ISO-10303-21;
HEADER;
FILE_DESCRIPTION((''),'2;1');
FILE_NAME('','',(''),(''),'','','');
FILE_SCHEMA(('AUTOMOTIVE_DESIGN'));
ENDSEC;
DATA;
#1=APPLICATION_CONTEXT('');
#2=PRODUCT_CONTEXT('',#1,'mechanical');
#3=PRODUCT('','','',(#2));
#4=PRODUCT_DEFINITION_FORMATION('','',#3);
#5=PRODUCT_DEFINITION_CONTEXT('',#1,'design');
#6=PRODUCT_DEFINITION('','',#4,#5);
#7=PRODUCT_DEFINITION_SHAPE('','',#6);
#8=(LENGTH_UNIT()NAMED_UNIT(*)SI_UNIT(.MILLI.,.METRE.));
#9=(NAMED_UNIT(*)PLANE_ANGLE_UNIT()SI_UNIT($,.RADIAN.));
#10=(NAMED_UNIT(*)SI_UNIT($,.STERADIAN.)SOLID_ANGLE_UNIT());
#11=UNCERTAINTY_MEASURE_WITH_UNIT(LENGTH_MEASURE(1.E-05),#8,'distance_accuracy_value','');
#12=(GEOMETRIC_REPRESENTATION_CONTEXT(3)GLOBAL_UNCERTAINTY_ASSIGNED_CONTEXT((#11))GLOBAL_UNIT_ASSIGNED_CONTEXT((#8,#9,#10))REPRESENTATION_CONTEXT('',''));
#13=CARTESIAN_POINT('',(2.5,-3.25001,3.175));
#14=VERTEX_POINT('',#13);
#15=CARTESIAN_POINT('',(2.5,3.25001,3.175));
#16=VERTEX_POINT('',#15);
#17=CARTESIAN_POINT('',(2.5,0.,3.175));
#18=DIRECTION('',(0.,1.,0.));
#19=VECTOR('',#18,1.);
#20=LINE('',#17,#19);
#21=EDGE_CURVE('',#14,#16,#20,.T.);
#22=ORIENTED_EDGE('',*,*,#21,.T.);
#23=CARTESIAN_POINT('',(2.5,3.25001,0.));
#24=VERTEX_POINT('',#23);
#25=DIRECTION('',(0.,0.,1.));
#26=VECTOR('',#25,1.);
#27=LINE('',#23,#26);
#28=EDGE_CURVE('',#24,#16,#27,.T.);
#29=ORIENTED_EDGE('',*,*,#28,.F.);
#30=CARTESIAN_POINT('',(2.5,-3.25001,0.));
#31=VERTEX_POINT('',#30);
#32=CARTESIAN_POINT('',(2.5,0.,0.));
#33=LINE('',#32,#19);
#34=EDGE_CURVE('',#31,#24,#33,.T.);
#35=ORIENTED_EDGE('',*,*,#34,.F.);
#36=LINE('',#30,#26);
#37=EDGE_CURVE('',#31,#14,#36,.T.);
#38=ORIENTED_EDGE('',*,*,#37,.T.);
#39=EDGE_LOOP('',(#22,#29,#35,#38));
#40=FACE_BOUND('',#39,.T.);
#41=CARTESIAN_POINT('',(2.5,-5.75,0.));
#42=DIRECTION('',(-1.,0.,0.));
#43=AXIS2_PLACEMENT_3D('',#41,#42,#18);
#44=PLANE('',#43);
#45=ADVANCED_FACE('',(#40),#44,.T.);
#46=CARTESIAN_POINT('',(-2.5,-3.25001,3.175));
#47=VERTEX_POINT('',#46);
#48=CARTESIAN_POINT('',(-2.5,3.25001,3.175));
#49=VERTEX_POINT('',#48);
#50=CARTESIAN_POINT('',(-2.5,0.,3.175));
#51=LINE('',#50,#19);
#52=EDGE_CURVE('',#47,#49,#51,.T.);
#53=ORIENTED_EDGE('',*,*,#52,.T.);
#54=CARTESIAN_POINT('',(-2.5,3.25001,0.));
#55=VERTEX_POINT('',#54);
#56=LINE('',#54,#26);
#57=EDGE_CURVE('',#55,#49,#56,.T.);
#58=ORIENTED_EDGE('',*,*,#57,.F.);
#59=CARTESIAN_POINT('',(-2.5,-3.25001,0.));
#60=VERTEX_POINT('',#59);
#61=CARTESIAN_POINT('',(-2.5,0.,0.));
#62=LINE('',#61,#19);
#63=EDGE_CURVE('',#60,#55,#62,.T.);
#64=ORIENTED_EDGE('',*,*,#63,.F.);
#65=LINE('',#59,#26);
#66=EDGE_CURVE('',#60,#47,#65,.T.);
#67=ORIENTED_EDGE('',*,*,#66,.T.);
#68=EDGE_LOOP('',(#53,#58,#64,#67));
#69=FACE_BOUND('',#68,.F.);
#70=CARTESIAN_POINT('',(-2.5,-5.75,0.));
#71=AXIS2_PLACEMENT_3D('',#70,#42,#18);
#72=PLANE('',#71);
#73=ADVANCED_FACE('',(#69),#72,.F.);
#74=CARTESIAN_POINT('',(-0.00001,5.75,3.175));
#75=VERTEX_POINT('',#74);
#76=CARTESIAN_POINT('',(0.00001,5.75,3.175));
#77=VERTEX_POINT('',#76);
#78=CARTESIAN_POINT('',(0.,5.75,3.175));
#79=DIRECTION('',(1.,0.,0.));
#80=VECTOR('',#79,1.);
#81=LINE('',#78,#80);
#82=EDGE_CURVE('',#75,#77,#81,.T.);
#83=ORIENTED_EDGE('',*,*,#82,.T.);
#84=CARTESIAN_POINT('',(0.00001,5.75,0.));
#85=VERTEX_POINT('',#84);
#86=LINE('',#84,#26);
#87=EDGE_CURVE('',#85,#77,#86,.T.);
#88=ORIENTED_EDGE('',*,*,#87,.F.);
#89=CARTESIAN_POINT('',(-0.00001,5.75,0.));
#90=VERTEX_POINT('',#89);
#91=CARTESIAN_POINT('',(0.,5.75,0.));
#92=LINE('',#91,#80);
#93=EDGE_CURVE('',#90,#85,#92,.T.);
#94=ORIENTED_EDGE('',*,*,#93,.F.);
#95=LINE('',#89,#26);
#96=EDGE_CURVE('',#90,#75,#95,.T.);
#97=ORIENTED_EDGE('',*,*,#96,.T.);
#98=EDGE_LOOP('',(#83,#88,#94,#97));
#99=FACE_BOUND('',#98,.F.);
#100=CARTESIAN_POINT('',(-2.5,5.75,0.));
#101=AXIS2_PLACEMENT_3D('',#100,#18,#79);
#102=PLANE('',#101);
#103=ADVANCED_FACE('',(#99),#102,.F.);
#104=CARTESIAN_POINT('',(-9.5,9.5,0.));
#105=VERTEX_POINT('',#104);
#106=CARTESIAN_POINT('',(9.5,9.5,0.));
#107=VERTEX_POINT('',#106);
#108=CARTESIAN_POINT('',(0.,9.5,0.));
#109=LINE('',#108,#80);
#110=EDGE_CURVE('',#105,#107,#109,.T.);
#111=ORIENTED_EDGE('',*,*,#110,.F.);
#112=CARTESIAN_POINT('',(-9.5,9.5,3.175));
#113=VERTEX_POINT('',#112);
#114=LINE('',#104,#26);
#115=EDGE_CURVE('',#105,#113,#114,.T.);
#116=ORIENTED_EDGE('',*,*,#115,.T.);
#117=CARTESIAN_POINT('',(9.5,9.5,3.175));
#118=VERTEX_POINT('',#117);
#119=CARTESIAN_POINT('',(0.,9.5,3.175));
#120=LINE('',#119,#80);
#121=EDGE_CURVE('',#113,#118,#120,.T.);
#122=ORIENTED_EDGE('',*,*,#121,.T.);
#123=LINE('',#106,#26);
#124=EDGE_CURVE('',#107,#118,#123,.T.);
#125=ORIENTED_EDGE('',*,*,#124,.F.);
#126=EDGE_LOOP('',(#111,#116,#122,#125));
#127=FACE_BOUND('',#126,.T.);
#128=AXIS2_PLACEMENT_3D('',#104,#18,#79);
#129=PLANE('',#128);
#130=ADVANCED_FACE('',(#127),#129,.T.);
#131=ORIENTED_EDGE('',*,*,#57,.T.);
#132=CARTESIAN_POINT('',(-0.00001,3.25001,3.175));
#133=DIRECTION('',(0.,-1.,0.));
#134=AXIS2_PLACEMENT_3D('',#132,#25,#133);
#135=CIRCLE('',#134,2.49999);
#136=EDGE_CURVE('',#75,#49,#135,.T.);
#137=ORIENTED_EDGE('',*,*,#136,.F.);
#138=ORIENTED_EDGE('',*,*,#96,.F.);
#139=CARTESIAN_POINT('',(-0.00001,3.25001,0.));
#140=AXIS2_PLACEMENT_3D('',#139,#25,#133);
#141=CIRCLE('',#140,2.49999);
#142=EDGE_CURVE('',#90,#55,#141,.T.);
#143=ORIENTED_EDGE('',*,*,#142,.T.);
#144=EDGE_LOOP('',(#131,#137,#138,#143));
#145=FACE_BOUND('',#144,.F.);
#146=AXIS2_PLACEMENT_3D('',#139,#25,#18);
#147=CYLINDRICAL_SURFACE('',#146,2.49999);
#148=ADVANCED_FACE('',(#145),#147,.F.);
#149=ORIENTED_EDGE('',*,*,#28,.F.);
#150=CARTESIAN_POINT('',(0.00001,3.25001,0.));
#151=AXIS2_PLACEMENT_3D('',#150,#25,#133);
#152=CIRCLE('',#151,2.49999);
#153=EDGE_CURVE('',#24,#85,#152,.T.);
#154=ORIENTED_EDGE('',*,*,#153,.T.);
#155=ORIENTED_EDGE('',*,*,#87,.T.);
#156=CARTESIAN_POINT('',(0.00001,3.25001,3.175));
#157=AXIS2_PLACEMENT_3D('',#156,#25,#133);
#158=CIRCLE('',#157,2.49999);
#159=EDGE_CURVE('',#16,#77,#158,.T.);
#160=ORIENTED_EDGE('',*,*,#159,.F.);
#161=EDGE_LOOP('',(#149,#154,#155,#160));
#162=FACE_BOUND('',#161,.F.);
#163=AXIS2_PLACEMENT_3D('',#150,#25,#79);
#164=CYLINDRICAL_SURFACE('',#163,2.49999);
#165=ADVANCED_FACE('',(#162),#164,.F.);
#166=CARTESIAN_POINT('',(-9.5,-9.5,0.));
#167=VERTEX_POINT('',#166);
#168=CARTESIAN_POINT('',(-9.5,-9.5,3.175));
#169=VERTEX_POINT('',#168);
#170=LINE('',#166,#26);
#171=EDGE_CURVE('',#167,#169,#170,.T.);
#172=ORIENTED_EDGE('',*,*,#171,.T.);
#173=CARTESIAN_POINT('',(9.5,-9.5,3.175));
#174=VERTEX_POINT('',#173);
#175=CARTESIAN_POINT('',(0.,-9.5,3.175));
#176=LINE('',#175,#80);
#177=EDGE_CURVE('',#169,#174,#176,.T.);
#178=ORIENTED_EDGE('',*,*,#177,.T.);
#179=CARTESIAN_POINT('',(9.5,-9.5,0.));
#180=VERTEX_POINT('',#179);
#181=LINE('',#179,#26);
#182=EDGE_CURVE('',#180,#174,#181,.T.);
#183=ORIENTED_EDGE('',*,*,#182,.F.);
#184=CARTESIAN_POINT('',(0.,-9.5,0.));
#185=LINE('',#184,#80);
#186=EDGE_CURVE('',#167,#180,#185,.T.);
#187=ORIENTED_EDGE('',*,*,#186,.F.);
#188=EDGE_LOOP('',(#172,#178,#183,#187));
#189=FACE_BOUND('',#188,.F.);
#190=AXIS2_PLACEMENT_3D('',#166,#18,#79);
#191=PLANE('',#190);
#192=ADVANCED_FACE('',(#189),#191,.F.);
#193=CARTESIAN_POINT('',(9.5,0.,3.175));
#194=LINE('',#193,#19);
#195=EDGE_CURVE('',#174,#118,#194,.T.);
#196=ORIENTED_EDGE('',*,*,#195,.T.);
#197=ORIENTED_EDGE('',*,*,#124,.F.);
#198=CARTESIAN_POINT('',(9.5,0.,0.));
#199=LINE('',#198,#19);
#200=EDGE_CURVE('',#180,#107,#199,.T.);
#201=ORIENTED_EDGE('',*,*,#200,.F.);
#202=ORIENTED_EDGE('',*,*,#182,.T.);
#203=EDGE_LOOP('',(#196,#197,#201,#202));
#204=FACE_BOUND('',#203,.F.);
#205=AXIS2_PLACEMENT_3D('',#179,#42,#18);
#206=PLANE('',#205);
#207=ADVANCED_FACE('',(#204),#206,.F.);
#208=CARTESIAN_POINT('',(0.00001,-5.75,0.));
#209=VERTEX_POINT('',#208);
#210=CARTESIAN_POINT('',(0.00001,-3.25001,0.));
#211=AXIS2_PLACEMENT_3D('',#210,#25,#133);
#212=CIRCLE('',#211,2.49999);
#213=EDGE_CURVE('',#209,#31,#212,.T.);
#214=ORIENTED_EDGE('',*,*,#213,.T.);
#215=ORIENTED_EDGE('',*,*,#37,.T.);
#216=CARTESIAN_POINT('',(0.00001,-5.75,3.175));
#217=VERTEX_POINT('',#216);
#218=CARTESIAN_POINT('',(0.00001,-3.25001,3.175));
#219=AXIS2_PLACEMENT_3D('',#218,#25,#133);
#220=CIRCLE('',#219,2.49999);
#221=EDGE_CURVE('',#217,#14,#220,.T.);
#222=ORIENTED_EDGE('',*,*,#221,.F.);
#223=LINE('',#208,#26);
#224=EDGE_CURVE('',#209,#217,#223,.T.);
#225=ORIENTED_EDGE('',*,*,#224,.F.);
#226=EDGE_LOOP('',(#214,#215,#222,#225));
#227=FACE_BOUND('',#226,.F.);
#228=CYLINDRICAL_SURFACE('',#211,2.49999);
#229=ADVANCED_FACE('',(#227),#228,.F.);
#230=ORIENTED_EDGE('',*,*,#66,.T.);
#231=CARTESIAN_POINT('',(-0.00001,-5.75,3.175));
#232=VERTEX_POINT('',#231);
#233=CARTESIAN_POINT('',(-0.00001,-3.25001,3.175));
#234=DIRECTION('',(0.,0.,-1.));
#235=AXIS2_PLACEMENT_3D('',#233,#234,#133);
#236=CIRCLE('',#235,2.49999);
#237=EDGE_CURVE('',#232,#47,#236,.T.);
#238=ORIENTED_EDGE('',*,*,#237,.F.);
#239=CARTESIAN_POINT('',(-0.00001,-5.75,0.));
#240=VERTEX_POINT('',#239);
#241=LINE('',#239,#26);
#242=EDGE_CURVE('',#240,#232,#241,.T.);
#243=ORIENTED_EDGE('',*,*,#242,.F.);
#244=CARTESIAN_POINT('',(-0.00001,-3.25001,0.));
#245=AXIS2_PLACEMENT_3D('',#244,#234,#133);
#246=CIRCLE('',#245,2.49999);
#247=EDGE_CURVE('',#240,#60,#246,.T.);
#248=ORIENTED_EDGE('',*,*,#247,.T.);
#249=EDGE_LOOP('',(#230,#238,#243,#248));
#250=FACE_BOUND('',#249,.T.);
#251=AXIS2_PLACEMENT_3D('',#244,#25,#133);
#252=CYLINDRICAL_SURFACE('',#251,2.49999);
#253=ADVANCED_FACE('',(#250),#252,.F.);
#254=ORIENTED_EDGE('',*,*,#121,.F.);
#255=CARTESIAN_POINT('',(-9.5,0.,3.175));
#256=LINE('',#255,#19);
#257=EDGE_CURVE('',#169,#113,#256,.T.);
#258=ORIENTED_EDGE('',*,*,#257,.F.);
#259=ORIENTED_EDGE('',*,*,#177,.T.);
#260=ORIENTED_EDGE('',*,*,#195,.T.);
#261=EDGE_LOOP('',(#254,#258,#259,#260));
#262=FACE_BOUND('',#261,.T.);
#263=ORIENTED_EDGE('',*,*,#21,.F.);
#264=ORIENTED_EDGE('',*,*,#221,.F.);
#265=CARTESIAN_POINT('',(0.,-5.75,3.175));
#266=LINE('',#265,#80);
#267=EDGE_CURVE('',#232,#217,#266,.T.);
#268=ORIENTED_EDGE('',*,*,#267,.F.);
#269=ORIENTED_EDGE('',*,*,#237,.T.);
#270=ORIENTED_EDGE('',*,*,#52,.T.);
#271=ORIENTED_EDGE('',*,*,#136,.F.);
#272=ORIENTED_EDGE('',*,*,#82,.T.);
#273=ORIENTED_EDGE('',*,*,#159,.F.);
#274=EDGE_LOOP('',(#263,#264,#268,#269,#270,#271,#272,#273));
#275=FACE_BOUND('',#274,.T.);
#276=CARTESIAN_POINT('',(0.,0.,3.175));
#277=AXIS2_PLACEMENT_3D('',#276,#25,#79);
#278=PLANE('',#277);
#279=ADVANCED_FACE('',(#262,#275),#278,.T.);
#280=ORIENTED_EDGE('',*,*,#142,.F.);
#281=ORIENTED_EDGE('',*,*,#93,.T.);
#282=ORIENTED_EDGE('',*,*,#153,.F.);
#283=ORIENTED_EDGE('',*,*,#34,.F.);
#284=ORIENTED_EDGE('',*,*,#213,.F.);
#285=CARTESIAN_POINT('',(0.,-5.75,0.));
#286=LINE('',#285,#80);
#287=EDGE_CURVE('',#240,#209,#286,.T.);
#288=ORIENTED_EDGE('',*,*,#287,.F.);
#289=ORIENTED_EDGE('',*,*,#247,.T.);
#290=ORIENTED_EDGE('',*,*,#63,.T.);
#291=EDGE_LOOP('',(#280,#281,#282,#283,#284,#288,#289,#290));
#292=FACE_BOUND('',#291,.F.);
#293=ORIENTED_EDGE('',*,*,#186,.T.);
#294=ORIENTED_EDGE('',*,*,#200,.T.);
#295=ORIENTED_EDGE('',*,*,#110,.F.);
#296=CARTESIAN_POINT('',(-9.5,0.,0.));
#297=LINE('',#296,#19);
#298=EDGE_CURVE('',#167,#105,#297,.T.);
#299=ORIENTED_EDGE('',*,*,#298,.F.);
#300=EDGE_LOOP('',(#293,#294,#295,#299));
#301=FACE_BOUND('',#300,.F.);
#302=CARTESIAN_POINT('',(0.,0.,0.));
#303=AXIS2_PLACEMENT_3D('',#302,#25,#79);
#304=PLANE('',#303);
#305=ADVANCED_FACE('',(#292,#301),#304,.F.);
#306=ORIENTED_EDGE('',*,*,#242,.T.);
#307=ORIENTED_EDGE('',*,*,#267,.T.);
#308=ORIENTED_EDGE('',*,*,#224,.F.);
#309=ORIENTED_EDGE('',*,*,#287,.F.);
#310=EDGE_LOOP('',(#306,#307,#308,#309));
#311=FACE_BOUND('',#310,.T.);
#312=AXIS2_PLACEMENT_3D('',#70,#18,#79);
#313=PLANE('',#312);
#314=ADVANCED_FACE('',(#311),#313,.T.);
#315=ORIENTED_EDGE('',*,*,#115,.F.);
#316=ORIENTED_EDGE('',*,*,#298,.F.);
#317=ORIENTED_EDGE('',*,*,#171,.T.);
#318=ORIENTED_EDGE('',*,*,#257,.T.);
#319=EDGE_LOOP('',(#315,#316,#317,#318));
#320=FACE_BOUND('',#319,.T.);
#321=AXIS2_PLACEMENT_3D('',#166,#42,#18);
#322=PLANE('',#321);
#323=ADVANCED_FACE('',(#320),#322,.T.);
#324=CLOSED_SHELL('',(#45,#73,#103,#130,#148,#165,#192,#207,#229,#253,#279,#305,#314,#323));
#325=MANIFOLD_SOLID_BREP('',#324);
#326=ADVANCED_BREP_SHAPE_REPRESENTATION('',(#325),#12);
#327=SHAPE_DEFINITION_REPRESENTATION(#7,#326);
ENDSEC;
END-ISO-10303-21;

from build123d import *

# Parameters (mm, degrees)
F0_W     = 19
F0_H     = 19
F0_W_2   = 5
F0_H_2   = 11.5
F1_DEPTH = 3.175
F2_R     = 2.49999


# Not quite as in the source:
# - a fillet or chamfer is up to 0.001 mm smaller than in the source, because OpenCascade refuses the exact size


with BuildPart() as f1:
    # F0 (on Top) → F1 (new body)
    with BuildSketch(Plane.XY):
        Rectangle(F0_W, F0_H)
        Rectangle(F0_W_2, F0_H_2, mode=Mode.SUBTRACT)
    extrude(amount=F1_DEPTH)

    # F2 (radius 2.5 in the source; OpenCascade refuses exactly that, so slightly less here)
    f2_edges = [f1.edges().sort_by_distance(p)[0] for p in [
        (-2.5, 5.75, 1.5875),
        (-2.5, -5.75, 1.5875),
        (2.5, 5.75, 1.5875),
        (2.5, -5.75, 1.5875),
    ]]
    fillet(f2_edges, radius=F2_R)


solid = f1.part
